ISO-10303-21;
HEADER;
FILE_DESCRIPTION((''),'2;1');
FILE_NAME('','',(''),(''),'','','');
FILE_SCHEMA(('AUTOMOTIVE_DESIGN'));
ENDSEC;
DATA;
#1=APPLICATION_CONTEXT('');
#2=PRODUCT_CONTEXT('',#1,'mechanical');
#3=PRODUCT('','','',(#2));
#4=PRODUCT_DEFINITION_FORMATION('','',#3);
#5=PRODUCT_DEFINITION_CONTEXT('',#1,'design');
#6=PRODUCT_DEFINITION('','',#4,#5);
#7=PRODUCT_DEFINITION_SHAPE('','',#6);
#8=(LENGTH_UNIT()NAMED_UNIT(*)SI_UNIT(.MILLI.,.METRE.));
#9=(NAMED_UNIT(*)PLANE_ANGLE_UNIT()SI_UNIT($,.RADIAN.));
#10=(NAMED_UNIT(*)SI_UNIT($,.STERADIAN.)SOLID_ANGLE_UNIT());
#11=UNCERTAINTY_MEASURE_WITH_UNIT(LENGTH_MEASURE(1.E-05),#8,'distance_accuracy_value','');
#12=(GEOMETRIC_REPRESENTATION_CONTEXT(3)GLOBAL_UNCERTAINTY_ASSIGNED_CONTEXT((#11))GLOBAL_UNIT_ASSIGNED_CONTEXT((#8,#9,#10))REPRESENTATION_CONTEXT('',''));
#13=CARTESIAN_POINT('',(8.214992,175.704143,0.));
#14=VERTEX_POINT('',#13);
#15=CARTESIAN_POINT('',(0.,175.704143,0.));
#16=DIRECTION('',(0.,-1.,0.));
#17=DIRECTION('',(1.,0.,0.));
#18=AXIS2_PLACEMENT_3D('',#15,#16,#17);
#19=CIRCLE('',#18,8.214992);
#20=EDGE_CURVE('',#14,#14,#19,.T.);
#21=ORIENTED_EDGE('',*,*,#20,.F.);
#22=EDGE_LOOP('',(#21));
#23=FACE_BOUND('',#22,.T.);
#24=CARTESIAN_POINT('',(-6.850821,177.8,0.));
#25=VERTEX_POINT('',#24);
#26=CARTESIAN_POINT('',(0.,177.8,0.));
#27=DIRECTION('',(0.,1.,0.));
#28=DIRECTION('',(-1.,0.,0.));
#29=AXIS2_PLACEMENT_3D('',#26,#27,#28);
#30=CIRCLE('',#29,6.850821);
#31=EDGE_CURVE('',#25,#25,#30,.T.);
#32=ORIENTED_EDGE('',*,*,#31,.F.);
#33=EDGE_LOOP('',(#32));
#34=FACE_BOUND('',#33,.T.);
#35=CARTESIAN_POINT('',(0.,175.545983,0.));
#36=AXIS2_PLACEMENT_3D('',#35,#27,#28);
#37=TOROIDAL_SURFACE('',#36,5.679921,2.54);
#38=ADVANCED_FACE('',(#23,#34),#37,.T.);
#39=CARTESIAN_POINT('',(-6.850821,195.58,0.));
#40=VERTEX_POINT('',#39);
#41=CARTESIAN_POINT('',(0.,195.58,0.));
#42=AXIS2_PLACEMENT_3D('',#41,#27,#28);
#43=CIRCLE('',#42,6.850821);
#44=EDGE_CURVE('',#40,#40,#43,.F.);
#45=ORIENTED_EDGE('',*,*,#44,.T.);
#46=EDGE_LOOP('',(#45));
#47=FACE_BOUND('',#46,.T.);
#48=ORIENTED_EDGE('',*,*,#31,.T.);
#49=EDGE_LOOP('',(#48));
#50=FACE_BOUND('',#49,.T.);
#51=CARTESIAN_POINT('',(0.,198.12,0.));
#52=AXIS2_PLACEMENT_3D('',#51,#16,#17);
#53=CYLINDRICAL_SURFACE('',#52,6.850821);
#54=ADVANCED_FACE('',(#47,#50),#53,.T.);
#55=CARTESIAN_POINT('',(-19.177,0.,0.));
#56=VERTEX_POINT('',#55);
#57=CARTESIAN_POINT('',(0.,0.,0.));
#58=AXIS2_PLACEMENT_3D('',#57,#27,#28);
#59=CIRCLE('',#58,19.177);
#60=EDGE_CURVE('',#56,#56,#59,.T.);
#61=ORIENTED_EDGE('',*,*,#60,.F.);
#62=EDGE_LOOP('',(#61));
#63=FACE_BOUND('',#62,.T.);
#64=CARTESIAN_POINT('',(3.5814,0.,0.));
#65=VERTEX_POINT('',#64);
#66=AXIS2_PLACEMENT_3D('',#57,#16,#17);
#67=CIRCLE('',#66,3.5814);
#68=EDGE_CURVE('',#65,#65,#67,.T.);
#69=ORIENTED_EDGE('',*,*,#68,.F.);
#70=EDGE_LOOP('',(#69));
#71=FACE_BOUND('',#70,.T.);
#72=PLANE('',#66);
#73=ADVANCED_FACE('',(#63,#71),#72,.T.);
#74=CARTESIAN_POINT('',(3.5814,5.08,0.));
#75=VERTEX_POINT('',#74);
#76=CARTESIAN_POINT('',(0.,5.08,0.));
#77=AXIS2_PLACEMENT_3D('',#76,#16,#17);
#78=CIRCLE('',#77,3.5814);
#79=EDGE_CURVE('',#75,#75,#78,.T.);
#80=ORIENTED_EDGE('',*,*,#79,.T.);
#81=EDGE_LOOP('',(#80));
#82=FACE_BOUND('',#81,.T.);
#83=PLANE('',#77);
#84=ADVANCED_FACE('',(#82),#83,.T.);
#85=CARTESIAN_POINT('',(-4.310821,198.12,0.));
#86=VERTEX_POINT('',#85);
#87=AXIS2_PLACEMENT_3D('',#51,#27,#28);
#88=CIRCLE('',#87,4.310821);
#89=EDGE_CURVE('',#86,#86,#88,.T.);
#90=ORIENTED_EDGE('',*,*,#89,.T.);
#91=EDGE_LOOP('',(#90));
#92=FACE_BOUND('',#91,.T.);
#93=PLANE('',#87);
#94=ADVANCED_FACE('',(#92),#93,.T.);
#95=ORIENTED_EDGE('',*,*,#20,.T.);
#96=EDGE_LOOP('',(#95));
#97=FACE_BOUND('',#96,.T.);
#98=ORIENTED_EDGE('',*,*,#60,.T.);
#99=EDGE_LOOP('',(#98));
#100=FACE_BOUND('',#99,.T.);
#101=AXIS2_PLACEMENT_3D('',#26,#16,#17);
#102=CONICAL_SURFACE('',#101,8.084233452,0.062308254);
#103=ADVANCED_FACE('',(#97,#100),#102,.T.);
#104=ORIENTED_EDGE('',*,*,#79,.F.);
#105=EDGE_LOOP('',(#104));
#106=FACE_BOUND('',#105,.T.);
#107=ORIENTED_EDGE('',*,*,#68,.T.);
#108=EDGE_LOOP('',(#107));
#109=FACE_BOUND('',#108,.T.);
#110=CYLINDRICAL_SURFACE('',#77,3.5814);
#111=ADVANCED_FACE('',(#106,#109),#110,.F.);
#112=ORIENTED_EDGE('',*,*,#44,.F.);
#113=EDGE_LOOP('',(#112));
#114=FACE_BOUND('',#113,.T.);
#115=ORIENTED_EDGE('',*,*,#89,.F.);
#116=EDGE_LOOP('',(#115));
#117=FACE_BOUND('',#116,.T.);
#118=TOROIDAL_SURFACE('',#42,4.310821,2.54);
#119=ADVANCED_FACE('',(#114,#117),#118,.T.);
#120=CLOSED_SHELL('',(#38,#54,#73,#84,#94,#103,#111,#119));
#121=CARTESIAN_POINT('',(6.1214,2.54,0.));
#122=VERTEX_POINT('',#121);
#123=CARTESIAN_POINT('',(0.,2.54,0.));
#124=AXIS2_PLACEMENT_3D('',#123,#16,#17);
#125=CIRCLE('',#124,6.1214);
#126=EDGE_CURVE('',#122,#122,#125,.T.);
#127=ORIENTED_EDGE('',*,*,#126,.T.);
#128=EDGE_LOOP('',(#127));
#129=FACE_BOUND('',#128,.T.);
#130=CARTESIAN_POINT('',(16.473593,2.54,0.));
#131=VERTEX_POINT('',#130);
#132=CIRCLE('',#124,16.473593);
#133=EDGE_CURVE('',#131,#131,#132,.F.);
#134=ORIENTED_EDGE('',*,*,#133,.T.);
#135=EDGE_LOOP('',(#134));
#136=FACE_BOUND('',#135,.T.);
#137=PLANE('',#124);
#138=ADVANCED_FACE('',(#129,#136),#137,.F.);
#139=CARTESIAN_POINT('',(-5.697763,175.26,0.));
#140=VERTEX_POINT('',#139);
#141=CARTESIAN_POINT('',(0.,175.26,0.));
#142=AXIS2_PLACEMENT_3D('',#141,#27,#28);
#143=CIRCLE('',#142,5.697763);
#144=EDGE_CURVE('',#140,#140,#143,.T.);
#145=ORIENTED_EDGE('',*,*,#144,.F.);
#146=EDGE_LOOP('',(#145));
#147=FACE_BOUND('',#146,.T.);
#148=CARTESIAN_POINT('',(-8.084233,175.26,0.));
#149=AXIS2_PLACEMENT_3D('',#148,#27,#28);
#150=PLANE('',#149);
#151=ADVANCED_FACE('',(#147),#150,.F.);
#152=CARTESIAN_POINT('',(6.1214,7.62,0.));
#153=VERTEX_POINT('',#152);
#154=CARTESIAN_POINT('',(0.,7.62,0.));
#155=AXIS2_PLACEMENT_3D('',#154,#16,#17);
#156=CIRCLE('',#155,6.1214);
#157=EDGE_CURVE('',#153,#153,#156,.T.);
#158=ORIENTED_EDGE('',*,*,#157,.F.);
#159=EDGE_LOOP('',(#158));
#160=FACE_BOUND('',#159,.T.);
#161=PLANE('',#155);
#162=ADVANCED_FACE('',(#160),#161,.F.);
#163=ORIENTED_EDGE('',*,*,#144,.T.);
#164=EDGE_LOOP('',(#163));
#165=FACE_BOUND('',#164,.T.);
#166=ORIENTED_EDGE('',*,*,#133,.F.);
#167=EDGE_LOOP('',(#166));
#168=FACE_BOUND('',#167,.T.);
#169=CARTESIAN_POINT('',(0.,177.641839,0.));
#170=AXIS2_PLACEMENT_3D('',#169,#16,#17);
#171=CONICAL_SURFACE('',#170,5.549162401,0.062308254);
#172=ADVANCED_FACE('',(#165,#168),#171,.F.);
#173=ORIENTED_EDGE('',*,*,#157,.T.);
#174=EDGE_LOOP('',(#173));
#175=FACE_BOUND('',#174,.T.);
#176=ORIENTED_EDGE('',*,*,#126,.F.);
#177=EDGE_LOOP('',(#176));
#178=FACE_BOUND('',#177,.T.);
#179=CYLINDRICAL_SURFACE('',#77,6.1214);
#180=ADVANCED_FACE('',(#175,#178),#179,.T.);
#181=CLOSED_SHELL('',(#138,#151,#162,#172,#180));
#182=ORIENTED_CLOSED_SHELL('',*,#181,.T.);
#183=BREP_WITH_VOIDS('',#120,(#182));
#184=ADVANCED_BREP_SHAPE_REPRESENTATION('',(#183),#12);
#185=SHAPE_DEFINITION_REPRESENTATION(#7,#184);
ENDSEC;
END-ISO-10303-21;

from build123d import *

# Parameters (mm, degrees)
SKETCH3_R           = 3.5814
CUT_EXTRUDE1_DEPTH  = 5.08
SKETCH4_R           = 6.850820799
BOSS_EXTRUDE1_DEPTH = 20.32
FILLET1_R           = 2.54


# Read off the part's stored shape, not the designer's step: Shell1
with BuildPart() as part:
    # Sketch2 → Revolve1 (revolve)
    with BuildSketch(Plane.XY):
        Polygon((0, 0), (-19.177, 0), (-8.084233452, 177.8), (0, 177.8), align=None)
    revolve(axis=Axis((0, 177.8, 0), (0, -1, 0)))

    # Sketch3 → Cut-Extrude1 (cut)
    with BuildSketch(Plane.XZ):
        Circle(SKETCH3_R)
    extrude(amount=-CUT_EXTRUDE1_DEPTH, mode=Mode.SUBTRACT)

    # Shell1 outline → Shell1 (revolve, cut)
    with BuildSketch(Plane.XY):
        Polygon((6.1214, 7.62), (6.1214, 2.54), (16.473593373, 2.54), (5.697763012, 175.26), (0, 175.26), (0, 7.62), align=None)
    revolve(axis=Axis((0, 0, 0), (0, 1, 0)), mode=Mode.SUBTRACT)

    # Sketch4 → Boss-Extrude1 (add)
    with BuildSketch(Plane(origin=(0, 177.8, 0), x_dir=(1, 0, 0), z_dir=(0, 1, 0))):
        with Locations(Location((0, 0, 0), (0, 0, 180))):
            Circle(SKETCH4_R)
    extrude(amount=BOSS_EXTRUDE1_DEPTH)

    # Fillet1
    # the kernel refuses this fillet: 2.54 mm, written as the material it takes off along each edge
    with BuildSketch(Plane(origin=(0, 198.12, 0), x_dir=(-1, 0, 0), z_dir=(0, 0, -1))) as fillet1_piece_1:
        with BuildLine():
            CenterArc((6.850820799 - FILLET1_R, -FILLET1_R), FILLET1_R, 0, 90)
            Line((6.850820799 - FILLET1_R, 0), (6.850820799 - FILLET1_R, FILLET1_R * 0.02))
            Line((6.850820799 - FILLET1_R, FILLET1_R * 0.02), (6.850820799 + FILLET1_R * 0.02, FILLET1_R * 0.02))
            Line((6.850820799 + FILLET1_R * 0.02, FILLET1_R * 0.02), (6.850820799 + FILLET1_R * 0.02, -FILLET1_R))
            Line((6.850820799 + FILLET1_R * 0.02, -FILLET1_R), (6.850820799, -FILLET1_R))
        make_face()
    revolve(axis=Axis((0, 198.12, 0), (0, 1, 0)), mode=Mode.SUBTRACT)
    with BuildSketch(Plane(origin=(0, 177.8, 0), x_dir=(-1, 0, 0), z_dir=(0, 0, 1))) as fillet1_piece_2:
        with BuildLine():
            CenterArc((5.679920823, 2.254017136), FILLET1_R, 297.450637113, 58.979362887)
            Line((6.850820799, 0), (6.874238798, -0.045080343))
            ThreePointArc((6.874238798, -0.045080343), (7.467527125, -0.0508), (8.084233452, -0.0508))
            Line((8.084233452, -0.0508), (8.134934873, -0.003163212))
            Line((8.134934873, -0.003163212), (8.265693295, 2.092693343))
            Line((8.265693295, 2.092693343), (8.214991874, 2.095856554))
        make_face()
    revolve(axis=Axis((0, 177.8, 0), (0, -1, 0)), mode=Mode.SUBTRACT)


solid = part.part
